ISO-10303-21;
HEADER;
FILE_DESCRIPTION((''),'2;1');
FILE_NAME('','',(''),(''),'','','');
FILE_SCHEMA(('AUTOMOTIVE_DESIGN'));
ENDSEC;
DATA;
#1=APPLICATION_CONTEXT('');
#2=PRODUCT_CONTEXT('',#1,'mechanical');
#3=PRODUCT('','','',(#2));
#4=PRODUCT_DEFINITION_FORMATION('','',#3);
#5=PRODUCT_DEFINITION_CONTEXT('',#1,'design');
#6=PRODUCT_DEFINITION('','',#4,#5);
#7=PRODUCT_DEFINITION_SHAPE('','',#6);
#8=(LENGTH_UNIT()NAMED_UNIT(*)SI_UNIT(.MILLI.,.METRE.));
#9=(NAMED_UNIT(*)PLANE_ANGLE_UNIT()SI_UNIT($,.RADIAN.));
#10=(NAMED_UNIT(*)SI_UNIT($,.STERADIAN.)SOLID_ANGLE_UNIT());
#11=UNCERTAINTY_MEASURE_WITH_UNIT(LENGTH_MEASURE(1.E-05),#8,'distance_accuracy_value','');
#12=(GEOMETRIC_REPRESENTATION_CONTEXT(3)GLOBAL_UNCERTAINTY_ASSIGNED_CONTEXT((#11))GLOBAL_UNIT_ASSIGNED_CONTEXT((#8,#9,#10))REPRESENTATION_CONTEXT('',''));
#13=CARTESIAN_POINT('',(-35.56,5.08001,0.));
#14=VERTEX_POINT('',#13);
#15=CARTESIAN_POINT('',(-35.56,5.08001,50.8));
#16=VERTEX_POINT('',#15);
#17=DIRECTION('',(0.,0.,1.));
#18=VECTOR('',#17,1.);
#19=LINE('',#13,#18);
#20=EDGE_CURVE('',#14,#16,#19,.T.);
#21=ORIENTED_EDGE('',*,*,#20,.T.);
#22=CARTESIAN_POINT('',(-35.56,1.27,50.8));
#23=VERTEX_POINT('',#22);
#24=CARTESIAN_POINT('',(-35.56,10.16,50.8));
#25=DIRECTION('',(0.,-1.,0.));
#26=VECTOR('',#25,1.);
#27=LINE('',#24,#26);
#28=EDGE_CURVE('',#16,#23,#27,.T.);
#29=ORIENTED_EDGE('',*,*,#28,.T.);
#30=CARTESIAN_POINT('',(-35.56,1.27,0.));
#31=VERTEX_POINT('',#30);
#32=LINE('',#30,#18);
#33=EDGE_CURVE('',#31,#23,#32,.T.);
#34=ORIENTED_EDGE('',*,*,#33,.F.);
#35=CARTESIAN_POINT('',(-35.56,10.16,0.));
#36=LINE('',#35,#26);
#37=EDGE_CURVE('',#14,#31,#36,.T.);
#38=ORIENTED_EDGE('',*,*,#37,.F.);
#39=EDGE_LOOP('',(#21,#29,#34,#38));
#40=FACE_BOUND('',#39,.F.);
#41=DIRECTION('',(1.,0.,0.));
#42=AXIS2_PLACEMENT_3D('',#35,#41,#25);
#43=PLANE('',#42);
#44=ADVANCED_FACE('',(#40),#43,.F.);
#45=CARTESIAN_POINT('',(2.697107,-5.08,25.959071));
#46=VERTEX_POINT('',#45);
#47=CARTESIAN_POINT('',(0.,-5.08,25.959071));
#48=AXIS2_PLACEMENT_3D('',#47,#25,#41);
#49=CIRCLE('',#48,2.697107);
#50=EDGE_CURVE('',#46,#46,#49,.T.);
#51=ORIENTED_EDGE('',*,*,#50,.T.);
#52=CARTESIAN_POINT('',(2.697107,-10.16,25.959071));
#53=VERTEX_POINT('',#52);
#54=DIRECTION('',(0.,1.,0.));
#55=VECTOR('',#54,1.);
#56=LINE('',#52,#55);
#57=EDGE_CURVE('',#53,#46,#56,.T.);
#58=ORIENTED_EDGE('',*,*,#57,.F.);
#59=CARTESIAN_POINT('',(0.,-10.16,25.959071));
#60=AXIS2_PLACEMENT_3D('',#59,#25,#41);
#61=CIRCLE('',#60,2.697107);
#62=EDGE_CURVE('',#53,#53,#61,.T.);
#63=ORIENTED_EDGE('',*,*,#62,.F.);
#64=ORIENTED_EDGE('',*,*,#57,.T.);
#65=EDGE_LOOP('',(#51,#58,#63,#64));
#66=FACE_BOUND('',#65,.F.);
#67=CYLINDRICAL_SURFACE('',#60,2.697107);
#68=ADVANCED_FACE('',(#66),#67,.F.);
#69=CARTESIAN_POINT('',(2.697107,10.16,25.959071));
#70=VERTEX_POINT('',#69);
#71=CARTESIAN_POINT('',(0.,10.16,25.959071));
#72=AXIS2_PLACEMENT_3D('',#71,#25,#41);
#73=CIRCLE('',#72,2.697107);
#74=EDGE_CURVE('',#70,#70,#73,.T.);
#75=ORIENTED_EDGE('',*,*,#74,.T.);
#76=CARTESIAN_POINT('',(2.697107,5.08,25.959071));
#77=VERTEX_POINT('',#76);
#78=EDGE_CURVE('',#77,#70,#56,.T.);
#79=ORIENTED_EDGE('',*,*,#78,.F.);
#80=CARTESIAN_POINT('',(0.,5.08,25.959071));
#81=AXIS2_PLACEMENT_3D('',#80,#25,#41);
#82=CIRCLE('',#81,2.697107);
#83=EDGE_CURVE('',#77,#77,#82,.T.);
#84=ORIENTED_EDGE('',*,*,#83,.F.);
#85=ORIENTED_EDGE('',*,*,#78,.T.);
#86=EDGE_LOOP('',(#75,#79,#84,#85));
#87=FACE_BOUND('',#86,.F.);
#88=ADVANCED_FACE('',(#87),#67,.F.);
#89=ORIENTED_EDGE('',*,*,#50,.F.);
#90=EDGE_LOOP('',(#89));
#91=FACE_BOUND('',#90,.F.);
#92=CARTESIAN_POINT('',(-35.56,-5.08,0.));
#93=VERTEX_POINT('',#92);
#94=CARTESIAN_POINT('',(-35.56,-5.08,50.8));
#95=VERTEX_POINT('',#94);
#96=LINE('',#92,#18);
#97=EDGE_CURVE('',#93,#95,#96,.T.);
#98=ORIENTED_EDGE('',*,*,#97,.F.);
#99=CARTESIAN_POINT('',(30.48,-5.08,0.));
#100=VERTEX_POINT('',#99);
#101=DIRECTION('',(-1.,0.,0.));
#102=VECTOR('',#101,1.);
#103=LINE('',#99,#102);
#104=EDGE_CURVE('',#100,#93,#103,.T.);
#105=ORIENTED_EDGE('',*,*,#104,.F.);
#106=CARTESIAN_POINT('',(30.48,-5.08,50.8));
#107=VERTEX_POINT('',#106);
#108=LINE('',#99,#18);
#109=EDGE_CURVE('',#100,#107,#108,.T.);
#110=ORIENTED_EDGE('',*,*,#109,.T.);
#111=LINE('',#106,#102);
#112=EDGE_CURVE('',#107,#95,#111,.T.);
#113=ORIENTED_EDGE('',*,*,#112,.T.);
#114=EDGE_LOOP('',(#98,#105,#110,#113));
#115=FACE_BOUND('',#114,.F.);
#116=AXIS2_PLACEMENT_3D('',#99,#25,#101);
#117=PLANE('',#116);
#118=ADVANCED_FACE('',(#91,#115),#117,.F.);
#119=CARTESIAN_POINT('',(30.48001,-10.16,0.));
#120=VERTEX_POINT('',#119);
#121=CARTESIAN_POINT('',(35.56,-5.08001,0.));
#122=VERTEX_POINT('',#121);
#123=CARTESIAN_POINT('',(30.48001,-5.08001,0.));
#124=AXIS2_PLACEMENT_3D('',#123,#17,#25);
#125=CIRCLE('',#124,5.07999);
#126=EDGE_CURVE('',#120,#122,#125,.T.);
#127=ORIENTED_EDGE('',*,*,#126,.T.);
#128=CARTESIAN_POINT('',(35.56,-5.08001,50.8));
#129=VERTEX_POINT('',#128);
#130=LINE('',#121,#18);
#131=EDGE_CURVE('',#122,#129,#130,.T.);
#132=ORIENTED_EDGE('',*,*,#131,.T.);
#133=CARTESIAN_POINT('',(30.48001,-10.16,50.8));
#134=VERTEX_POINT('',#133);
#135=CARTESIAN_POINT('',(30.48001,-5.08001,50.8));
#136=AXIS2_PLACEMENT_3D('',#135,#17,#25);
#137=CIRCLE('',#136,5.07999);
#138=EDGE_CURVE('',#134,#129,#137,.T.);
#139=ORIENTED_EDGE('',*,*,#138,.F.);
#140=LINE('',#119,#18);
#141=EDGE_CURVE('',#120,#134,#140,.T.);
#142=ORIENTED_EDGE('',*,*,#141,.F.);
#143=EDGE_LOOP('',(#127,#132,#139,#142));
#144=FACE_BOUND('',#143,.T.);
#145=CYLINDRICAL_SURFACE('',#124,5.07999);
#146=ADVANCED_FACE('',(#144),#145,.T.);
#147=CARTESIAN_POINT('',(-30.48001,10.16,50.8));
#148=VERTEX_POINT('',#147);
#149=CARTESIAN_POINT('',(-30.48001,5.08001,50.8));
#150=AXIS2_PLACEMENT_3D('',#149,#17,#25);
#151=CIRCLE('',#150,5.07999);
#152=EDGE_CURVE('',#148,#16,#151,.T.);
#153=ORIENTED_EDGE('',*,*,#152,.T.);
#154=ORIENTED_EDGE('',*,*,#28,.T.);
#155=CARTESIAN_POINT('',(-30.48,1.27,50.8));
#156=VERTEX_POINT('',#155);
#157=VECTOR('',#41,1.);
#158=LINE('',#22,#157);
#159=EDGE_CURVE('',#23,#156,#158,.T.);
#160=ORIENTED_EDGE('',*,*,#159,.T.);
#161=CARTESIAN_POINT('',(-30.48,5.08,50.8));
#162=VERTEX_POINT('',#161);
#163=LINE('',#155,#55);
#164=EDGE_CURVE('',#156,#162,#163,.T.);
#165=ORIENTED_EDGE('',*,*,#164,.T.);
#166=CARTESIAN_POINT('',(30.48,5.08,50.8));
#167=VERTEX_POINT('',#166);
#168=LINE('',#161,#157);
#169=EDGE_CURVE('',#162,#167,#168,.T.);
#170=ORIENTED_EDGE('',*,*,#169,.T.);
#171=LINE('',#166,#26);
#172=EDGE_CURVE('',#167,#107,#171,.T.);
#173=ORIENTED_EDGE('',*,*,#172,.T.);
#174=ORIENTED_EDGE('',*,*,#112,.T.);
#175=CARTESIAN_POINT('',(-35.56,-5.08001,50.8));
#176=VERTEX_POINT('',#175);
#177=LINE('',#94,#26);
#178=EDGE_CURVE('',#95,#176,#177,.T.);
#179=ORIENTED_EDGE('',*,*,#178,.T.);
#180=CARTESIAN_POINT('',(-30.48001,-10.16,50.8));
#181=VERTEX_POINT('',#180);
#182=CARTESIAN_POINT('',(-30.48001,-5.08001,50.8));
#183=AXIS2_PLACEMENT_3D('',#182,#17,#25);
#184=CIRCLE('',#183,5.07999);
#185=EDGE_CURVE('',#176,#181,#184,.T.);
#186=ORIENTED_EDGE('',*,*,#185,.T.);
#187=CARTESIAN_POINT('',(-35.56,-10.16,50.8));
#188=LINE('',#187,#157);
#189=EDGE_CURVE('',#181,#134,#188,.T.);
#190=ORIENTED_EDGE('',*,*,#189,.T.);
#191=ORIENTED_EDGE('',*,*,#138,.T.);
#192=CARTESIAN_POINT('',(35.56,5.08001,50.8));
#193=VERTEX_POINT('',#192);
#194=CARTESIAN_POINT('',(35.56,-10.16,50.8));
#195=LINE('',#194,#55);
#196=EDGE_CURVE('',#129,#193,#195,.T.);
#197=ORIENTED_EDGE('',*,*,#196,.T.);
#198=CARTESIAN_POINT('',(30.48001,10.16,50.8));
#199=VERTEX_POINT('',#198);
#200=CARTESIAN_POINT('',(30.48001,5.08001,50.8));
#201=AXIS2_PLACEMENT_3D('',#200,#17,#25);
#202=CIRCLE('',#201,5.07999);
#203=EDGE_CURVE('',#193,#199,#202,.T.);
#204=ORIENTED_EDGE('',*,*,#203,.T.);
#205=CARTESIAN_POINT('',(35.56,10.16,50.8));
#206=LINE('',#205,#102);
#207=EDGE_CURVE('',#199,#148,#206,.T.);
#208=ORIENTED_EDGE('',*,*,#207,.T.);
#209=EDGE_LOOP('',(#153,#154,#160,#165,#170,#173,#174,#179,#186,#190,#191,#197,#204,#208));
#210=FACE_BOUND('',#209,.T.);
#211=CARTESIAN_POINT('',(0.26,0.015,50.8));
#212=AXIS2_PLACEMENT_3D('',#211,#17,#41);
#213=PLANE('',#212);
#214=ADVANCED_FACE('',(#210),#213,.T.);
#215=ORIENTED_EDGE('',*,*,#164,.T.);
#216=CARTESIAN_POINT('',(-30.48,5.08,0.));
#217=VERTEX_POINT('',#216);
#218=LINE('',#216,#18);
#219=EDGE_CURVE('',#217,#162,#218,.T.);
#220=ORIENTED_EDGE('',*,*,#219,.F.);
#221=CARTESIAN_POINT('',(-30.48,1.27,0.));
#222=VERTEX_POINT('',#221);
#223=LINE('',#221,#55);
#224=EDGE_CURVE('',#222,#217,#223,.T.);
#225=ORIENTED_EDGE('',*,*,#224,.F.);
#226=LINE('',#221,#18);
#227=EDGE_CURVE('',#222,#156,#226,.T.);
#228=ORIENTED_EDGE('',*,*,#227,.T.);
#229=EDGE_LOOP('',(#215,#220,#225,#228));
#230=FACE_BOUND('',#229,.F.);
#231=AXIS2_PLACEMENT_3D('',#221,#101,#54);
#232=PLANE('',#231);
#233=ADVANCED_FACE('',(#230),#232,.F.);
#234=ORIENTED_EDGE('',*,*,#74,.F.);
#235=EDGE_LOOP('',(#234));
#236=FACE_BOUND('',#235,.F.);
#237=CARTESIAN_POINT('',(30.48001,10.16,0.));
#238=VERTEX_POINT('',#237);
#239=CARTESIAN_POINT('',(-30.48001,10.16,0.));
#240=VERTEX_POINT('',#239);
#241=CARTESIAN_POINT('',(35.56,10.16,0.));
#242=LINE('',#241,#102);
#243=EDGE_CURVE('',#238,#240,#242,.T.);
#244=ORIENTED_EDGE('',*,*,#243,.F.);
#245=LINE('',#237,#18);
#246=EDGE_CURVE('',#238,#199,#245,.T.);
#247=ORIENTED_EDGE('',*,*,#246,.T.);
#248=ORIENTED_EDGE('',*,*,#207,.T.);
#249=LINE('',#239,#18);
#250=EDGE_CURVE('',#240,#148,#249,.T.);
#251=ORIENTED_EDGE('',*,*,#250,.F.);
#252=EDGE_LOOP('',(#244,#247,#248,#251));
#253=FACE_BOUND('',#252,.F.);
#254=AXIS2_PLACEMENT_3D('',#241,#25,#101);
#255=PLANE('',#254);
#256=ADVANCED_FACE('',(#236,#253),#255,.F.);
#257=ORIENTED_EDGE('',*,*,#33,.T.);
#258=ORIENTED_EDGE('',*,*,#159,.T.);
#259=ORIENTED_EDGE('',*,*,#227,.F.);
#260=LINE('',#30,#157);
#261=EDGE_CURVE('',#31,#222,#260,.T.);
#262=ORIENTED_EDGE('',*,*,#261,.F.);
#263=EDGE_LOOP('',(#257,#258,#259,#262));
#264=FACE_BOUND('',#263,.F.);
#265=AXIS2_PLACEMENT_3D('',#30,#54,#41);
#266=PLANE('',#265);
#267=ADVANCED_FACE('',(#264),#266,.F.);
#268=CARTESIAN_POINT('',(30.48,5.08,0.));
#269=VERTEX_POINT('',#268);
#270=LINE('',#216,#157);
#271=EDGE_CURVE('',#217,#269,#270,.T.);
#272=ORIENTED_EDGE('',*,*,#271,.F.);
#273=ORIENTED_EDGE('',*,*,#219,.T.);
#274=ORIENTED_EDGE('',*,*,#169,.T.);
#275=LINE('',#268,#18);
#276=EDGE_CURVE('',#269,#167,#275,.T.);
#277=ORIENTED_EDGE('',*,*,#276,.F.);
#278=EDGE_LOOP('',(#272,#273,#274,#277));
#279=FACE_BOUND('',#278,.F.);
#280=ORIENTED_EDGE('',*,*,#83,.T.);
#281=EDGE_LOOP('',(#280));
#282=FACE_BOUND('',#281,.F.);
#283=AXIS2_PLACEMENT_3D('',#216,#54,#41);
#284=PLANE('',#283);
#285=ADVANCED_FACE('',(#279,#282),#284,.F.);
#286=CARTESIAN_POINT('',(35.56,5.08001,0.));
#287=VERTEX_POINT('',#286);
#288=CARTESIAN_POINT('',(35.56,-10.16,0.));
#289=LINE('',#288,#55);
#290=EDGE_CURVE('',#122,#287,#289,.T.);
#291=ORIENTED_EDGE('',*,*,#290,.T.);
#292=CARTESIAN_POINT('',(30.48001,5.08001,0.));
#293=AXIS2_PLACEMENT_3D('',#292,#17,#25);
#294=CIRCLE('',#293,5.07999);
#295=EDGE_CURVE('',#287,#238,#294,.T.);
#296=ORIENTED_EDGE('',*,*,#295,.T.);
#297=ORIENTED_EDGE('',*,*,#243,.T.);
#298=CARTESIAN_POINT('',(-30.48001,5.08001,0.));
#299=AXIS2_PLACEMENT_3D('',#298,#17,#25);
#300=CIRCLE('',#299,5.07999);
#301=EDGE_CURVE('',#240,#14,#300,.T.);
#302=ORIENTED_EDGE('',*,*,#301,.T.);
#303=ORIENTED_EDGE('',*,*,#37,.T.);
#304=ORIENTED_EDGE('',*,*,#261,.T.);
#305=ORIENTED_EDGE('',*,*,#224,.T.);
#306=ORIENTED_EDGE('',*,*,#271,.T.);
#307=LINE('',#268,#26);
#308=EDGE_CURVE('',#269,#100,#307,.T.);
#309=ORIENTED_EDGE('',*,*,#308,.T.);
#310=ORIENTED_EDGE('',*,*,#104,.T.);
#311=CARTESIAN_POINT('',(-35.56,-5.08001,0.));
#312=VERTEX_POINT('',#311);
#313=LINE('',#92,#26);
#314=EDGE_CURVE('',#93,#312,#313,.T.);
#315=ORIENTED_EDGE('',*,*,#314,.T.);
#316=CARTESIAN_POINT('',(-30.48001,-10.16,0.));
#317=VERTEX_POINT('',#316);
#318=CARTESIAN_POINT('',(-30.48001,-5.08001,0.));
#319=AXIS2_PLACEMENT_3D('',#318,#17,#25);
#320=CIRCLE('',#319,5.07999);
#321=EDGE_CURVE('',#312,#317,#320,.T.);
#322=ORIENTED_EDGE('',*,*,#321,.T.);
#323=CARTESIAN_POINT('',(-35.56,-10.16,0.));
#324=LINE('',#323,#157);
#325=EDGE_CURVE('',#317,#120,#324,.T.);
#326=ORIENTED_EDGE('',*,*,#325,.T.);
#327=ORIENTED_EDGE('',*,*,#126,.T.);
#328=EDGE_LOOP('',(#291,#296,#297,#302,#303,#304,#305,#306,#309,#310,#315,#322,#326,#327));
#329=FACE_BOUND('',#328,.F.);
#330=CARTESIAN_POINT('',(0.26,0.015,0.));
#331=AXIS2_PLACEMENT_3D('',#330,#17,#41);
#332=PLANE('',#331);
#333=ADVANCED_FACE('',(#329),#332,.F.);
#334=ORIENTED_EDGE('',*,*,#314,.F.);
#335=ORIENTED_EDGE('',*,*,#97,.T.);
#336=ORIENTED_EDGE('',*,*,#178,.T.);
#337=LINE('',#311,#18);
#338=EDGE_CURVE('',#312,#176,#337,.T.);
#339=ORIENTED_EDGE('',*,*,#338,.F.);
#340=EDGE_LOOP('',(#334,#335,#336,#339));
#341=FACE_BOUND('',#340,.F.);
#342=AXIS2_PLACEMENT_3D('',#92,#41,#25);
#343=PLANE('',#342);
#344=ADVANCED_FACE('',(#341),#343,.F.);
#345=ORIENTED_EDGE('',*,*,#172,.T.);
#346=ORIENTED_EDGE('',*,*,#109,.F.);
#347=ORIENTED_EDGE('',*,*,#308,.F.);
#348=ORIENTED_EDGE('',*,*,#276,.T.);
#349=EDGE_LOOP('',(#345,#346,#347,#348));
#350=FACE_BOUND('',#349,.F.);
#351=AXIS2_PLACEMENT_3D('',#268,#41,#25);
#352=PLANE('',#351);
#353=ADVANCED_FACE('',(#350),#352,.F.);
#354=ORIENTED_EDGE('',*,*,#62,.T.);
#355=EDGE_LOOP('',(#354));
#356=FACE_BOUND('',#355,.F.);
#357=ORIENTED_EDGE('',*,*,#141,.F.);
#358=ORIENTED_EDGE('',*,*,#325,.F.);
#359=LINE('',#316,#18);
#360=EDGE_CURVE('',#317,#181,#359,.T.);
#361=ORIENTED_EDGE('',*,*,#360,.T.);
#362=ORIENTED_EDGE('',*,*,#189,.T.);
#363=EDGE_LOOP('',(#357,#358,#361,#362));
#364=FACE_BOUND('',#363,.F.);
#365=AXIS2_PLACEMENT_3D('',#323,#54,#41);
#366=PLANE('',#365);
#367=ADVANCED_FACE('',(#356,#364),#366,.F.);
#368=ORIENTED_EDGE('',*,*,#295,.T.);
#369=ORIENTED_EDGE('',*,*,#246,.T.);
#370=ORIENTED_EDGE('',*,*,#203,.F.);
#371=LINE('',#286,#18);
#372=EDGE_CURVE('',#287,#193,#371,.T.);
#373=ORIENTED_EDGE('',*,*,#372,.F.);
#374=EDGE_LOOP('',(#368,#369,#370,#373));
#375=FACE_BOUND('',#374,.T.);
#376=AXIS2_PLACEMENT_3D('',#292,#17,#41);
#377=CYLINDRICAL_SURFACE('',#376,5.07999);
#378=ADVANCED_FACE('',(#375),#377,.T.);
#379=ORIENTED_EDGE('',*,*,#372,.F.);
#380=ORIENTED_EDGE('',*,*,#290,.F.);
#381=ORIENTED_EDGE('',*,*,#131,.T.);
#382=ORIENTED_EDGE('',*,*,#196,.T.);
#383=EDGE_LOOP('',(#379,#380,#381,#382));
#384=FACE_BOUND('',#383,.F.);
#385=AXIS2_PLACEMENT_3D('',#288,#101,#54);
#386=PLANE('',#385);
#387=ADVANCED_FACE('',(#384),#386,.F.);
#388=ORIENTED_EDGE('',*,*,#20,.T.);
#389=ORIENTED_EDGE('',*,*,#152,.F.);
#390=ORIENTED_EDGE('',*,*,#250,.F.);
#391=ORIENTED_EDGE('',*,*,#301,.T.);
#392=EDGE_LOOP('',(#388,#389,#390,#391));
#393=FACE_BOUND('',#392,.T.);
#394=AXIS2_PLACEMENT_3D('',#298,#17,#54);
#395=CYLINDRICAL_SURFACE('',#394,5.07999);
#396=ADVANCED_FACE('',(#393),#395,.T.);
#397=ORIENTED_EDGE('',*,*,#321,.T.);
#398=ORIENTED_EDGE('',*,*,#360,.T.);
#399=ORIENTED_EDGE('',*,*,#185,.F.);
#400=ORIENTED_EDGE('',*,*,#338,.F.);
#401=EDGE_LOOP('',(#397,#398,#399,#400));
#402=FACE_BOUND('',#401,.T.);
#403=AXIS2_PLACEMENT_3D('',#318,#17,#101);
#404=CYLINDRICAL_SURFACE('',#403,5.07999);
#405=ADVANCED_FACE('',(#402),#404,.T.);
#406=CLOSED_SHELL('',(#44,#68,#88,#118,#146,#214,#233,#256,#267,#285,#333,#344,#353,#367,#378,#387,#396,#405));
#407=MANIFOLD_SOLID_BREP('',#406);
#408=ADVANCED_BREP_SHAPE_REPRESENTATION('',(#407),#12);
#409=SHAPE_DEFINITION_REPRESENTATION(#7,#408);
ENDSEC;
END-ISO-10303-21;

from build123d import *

# Parameters (mm, degrees)
F1_DEPTH = 50.8
F2_R     = 5.07999
F3_R     = 2.6971074435
F4_DEPTH = 25.4


# Not quite as in the source:
# - a fillet or chamfer is up to 0.001 mm smaller than in the source, because OpenCascade refuses the exact size


with BuildPart() as f1:
    # F0 (on Top) → F1 (new body)
    with BuildSketch(Plane.XY):
        Polygon((-30.48, 1.27), (-30.48, 5.08), (30.48, 5.08), (30.48, -5.08), (-30.48, -5.08), (-35.56, -5.08), (-35.56, -10.16), (35.56, -10.16), (35.56, 10.16), (-35.56, 10.16), (-35.56, 1.27), align=None)
    extrude(amount=F1_DEPTH)

    # F2 (radius 5.08 in the source; OpenCascade refuses exactly that, so slightly less here)
    f2_edges = [f1.edges().sort_by_distance(p)[0] for p in [
        (35.56, 10.16, 25.4),
        (35.56, -10.16, 25.4),
        (-35.56, 10.16, 25.4),
        (-35.56, -10.16, 25.4),
    ]]
    fillet(f2_edges, radius=F2_R)

    # F3 (on face) → F4 (cut)
    with BuildSketch(Plane.XZ.offset(10.16)):
        with Locations((0, 25.9590707719)):
            Circle(F3_R)
    extrude(amount=-F4_DEPTH, mode=Mode.SUBTRACT)


solid = f1.part
